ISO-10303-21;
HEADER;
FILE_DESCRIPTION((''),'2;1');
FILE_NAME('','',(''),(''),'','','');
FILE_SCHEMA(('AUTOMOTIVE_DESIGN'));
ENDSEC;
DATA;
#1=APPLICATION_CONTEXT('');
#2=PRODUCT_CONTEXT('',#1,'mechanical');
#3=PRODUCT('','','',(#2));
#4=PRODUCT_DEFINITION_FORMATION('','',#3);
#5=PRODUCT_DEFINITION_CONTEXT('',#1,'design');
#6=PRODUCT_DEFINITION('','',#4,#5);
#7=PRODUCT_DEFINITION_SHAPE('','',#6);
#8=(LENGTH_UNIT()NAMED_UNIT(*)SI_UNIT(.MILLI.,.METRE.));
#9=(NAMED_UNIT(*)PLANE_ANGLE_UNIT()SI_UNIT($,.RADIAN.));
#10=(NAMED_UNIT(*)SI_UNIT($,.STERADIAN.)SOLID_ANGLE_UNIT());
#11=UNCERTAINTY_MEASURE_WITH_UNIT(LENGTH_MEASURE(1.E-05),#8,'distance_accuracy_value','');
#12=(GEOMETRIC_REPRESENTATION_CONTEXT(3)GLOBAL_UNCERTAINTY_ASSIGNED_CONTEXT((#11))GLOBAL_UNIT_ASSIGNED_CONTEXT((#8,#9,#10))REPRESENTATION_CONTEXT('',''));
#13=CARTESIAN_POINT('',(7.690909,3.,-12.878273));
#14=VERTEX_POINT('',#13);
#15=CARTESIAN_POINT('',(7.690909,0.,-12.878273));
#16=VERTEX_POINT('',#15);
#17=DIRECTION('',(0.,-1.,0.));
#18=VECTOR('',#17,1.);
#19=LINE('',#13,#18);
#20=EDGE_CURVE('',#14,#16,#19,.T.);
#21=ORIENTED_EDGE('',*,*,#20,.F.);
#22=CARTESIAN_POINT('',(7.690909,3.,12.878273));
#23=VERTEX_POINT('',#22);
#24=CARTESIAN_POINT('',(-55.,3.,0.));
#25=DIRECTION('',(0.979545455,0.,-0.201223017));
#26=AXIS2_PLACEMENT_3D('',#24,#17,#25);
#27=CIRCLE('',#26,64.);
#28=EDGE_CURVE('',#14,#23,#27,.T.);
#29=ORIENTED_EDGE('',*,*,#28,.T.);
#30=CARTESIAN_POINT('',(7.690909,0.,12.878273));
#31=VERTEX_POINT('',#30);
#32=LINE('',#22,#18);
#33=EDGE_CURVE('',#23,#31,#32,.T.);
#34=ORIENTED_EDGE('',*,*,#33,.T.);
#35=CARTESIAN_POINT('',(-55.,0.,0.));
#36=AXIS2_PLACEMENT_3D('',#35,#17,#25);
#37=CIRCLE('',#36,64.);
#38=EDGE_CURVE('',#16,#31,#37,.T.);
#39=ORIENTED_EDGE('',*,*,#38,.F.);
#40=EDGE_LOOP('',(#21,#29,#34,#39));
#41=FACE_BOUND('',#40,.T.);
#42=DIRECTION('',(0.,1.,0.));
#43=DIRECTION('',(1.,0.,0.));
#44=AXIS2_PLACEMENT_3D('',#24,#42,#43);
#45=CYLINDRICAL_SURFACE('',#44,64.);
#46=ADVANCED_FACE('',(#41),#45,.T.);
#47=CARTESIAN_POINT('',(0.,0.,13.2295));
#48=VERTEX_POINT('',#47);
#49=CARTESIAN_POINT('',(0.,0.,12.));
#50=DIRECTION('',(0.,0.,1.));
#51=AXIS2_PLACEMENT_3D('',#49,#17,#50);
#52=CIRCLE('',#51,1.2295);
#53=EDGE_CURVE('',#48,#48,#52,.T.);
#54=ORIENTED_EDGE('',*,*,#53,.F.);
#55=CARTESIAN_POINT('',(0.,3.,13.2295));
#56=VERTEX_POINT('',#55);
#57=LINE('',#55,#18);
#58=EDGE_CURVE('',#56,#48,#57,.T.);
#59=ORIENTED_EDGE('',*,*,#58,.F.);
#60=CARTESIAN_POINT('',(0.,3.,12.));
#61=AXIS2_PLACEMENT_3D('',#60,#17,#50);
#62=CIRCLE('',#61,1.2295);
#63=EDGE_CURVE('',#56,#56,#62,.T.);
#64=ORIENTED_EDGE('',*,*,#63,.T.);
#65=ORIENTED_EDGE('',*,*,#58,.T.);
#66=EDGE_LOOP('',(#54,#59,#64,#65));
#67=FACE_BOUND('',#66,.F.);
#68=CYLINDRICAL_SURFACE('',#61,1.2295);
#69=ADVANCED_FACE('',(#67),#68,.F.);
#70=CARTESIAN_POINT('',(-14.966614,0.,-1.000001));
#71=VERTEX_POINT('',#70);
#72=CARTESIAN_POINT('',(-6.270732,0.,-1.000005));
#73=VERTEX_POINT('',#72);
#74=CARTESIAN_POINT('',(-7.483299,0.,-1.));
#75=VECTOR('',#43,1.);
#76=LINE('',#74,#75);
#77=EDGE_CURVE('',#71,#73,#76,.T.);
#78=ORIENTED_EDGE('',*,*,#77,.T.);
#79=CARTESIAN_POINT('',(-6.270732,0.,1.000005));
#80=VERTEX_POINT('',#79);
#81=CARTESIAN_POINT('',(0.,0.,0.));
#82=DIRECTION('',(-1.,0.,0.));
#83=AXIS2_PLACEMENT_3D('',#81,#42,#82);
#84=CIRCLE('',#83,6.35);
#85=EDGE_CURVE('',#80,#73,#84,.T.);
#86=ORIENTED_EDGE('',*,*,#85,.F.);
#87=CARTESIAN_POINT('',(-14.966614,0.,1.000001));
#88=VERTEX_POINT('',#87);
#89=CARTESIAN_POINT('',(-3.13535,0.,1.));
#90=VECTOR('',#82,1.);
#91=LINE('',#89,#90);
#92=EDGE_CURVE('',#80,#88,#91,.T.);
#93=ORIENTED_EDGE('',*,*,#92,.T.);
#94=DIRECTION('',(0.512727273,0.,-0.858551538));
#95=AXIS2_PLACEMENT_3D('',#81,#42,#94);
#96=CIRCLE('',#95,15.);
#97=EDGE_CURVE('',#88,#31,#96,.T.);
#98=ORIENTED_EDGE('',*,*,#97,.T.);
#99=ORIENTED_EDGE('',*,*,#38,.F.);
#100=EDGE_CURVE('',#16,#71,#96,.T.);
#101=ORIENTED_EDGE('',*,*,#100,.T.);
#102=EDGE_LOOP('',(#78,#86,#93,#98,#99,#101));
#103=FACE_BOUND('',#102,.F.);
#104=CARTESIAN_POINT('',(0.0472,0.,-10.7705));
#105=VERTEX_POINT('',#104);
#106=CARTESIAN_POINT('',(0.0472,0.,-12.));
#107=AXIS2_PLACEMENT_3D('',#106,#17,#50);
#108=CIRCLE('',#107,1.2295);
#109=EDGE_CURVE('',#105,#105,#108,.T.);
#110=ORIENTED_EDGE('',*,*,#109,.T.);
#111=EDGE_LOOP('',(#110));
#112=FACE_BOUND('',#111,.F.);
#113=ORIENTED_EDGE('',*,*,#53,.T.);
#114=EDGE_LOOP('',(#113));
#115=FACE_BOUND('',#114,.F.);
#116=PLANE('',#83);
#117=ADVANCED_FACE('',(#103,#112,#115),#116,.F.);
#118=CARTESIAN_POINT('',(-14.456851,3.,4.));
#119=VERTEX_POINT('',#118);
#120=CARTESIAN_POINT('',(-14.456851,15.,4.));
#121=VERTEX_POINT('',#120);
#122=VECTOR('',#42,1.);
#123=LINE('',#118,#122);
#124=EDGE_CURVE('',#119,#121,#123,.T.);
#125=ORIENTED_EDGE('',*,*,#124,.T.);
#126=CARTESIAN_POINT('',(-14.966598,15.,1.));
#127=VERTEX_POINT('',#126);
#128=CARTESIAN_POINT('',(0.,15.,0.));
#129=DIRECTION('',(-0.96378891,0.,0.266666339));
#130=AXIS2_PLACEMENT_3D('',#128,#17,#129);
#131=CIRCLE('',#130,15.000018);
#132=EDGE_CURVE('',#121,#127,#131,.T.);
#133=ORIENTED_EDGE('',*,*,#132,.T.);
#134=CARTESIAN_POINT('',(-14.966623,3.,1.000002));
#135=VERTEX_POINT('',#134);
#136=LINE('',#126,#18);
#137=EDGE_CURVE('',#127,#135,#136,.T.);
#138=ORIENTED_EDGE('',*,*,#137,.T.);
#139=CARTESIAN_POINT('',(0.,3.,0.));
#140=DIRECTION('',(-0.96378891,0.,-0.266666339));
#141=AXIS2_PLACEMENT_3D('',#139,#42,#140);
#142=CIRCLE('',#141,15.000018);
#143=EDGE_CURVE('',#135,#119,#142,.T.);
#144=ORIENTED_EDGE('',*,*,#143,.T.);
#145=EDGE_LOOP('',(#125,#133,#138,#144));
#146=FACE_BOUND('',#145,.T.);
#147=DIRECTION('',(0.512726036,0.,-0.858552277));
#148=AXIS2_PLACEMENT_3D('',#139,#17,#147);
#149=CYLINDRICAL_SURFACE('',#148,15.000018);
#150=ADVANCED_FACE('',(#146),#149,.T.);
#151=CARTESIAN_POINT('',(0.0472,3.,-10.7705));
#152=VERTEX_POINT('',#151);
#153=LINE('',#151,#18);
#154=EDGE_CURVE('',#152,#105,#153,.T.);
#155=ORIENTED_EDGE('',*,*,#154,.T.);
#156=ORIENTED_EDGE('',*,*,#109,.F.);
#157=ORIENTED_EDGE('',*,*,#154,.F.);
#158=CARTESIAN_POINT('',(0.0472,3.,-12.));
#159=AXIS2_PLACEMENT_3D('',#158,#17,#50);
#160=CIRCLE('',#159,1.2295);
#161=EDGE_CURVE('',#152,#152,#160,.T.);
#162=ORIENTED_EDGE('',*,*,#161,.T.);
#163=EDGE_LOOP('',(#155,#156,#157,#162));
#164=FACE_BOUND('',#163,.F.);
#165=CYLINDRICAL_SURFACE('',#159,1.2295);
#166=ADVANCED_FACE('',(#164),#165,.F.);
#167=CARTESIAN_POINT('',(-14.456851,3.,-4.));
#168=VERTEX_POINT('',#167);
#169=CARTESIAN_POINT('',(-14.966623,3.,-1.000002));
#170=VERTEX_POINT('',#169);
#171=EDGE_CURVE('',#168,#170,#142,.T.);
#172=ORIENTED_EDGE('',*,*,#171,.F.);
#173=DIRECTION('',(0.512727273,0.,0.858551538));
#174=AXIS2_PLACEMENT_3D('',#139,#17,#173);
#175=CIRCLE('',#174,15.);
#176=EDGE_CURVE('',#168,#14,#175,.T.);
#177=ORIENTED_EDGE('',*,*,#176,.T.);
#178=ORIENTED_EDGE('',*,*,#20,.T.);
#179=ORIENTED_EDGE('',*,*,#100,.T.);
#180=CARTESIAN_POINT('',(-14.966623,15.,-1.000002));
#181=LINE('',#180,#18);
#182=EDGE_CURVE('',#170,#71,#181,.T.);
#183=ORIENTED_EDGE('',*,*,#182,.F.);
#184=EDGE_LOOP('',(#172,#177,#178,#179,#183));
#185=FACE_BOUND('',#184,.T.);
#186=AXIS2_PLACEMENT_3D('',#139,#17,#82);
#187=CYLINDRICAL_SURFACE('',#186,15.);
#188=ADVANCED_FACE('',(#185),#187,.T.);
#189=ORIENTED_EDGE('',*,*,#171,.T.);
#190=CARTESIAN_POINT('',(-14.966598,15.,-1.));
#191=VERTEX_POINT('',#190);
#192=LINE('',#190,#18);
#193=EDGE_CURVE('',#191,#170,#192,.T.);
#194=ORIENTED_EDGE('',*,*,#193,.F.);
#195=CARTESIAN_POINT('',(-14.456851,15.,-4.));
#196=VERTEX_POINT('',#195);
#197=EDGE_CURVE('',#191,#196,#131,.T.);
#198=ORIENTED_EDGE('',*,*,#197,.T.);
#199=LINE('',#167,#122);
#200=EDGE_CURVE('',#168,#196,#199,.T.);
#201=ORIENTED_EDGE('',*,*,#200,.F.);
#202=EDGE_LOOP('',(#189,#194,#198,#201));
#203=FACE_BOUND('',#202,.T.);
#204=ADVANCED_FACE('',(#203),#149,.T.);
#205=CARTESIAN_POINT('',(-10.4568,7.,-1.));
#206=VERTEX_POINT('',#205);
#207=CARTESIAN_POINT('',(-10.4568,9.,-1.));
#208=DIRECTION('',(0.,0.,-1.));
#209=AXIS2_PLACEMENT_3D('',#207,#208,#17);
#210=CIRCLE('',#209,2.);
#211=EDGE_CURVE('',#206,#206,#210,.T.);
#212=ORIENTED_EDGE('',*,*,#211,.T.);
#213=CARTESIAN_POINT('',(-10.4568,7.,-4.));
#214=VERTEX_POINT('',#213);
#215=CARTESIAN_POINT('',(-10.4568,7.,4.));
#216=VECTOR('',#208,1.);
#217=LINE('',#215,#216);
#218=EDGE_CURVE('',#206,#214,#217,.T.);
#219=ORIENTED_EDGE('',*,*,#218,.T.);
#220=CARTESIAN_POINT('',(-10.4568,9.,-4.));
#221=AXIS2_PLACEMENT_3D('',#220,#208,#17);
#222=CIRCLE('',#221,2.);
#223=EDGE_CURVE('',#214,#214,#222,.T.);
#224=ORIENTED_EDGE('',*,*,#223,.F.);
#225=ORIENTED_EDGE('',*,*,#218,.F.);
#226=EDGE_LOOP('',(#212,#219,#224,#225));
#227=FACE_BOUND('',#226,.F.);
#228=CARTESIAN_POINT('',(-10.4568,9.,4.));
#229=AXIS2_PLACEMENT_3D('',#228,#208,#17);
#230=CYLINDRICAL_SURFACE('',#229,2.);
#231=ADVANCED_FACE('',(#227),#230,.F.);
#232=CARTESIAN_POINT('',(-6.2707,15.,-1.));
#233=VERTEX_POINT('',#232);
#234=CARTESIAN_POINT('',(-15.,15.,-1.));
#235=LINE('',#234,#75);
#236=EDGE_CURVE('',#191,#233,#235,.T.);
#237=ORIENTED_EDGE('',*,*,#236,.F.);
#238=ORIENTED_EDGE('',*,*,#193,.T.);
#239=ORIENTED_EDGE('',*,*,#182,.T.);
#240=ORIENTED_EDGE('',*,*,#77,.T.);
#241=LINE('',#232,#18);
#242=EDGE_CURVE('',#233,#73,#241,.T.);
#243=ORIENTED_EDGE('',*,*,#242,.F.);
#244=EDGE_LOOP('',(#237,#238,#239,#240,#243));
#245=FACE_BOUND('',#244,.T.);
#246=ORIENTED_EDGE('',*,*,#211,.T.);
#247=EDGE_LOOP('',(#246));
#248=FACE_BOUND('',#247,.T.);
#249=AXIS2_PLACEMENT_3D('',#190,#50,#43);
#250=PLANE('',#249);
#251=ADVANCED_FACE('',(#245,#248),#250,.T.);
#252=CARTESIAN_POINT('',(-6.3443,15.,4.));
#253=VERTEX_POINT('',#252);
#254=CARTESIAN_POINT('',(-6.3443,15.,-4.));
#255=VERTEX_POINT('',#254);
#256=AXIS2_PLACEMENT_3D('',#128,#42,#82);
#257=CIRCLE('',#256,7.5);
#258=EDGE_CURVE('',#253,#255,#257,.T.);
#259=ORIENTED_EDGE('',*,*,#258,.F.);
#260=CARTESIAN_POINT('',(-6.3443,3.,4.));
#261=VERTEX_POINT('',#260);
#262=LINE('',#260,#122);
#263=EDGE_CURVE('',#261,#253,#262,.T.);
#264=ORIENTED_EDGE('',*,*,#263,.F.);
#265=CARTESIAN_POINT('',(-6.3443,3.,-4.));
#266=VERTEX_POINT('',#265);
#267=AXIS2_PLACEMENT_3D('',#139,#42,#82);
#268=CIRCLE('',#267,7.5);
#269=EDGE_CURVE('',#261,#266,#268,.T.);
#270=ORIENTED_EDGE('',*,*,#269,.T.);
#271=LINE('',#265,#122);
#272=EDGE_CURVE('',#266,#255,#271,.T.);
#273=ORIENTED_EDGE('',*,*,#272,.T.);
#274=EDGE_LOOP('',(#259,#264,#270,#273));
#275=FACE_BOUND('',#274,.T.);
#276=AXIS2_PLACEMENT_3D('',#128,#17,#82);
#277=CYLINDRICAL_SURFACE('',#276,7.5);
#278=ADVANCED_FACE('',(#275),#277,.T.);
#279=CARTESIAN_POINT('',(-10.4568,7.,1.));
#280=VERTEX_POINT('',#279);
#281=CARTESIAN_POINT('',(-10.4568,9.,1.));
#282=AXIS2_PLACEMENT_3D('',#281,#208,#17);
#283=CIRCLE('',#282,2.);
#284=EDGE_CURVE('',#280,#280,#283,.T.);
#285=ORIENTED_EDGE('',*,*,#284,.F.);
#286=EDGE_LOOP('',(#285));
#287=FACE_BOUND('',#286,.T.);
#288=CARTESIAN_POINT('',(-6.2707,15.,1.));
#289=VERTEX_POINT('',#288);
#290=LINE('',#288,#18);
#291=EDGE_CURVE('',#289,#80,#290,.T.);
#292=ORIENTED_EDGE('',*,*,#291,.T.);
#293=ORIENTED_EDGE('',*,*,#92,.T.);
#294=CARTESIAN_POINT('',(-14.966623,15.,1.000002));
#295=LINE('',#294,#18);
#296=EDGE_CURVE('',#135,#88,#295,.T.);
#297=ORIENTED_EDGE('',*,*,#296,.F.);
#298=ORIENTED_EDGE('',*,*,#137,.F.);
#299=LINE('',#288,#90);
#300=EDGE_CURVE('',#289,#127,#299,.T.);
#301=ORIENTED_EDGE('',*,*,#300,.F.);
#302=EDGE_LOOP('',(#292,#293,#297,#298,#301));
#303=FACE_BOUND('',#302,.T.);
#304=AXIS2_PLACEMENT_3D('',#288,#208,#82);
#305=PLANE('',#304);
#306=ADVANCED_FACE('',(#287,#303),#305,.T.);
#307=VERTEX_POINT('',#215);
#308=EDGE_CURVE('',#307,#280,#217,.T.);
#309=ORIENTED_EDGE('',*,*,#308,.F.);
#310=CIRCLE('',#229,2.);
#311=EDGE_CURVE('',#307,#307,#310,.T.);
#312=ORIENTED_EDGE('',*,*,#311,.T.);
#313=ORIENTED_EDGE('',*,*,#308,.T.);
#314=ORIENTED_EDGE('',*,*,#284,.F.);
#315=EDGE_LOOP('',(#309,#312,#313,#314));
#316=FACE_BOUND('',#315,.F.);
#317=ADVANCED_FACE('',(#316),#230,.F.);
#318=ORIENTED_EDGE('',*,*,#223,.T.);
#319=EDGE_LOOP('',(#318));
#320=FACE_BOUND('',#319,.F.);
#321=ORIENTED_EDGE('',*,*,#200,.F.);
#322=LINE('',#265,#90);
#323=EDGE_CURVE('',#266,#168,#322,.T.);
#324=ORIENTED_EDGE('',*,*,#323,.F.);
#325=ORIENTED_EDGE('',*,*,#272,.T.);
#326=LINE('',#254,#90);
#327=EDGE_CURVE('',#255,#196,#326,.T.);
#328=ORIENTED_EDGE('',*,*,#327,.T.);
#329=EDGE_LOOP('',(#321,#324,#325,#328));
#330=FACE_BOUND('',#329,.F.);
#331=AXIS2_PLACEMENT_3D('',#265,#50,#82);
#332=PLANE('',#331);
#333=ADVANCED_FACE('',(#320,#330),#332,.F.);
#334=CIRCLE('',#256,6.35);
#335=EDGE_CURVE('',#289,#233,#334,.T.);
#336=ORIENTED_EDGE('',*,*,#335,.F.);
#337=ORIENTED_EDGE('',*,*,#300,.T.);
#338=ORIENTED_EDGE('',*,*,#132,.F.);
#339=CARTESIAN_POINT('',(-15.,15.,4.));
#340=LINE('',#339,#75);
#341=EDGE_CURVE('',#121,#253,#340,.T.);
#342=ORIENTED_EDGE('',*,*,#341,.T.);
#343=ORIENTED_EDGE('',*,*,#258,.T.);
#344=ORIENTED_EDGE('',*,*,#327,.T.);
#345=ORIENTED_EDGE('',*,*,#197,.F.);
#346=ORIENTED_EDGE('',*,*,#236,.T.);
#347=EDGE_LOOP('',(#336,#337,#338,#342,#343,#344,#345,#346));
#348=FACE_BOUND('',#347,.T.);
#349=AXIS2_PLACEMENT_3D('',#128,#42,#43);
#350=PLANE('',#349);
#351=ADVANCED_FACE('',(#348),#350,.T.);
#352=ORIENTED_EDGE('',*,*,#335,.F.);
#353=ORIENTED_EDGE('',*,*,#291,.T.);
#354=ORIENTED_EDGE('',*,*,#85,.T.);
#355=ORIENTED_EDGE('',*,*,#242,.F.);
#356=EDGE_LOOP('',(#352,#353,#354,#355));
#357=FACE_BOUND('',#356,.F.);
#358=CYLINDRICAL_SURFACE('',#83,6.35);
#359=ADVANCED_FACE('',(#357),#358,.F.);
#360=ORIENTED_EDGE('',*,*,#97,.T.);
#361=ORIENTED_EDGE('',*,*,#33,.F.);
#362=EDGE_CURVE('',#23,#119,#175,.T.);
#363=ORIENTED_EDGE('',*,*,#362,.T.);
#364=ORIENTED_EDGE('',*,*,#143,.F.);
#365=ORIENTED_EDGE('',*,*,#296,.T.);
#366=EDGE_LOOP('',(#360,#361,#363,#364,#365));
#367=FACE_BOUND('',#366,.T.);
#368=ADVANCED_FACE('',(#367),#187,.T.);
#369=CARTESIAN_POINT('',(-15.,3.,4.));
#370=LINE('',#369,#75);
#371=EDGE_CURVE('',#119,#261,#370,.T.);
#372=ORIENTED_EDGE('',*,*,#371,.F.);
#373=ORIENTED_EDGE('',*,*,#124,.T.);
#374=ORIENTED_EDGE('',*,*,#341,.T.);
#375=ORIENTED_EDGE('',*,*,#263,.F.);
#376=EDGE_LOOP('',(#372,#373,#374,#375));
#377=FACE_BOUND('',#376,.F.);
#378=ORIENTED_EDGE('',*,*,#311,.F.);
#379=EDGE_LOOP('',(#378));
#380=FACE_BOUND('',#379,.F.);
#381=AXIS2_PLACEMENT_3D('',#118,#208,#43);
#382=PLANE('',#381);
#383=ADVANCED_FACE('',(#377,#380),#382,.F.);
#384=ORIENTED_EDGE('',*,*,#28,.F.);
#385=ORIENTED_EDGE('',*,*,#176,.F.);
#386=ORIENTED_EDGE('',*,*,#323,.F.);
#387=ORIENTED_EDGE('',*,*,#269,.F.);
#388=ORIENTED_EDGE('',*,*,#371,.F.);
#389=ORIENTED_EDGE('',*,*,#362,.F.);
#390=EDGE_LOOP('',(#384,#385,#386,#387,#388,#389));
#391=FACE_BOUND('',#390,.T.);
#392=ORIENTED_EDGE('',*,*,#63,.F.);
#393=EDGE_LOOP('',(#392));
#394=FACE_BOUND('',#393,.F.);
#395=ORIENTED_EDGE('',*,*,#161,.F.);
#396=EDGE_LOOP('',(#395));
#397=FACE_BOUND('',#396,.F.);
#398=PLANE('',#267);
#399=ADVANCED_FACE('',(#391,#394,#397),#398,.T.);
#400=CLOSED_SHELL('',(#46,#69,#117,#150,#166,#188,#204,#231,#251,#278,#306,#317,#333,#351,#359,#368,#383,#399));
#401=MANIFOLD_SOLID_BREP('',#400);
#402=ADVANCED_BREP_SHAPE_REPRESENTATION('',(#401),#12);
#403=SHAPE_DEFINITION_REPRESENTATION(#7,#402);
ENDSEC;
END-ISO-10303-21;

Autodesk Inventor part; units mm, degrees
ref_plane "YZ Plane" through (0, 0, 0) normal (1, 0, 0) x (0, 1, 0)
ref_plane "XZ Plane" through (0, 0, 0) normal (0, 1, 0) x (-1, 0, 0)
ref_plane "XY Plane" through (0, 0, 0) normal (0, 0, 1) x (1, 0, 0)
sketch "Sketch1" plane through (0, 0, 0) normal (0, 0, 1) x (1, 0, 0)
  line L0 (-15, 0) -> (-6.35, 0)
  line L1 (-6.35, 0) -> (-6.35, 15)
  line L2 (-6.35, 15) -> (-7.5, 15)
  line L3 (-7.5, 15) -> (-7.5, 3)
  line L4 (-7.5, 3) -> (-15, 3)
  line L5 (-15, 3) -> (-15, 0)
  line L6 (0, -3) -> (0, 18) projected
  point P0 (0, 0)
  dimension "d0" = 3
  dimension "d2" = 15
  dimension "d3" = 6.35
  dimension "d4" = 15
  dimension "d17" = 7.5
  dimension "d18" = 1.15
revolve "Revolution1" add sketch "Sketch1" angle 360 about axis through (0, -10, 0) along (0, 1, 0)
sketch "Sketch2" plane through (0, 3, 0) normal (0, 1, 0) x (1, 0, 0)
  point P0 (0, 0)
  point P1 (0.0472, 12)
  point P2 (0, -12)
  dimension "d6" = 12
  dimension "d22" = 12
hole "Hole1" at (0.0472, 3, -12) at (0, 3, 12) direction (0, -1, 0) diameter 2.459 end through all thread size "M3x0.5" class "6H" standard "ISO Metric profile"
sketch "Sketch4" plane through (0, 3, 0) normal (0, 1, 0) x (1, 0, 0)
  circle A0 centre (0, 0) radius 15 projected
  circle A1 centre (0, 0) radius 7.5 projected
  circle A2 centre (-55, 0) radius 64
  point P0 (7.6909, 12.8783)
  point P1 (7.5, 0)
  point P2 (7.6909, -12.8783)
  dimension "d23" = 128
  dimension "d24" = 55
extrude "Extrusion2" cut sketch "Sketch4" against normal through all contours A0 A2 picked at (10.8452, -2.4648)
sketch "Sketch6" plane through (0, 3, 0) normal (0, 1, 0) x (1, 0, 0)
  arc A0 (7.6909, 12.8783) -> (7.6909, -12.8783) centre (0, 0) ccw projected
  circle A1 centre (0, 0) radius 7.5 projected
  line L0 (-6.3443, 4) -> (-15, 4)
  line L1 (-15, 4) -> (-15, -4)
  line L2 (-15, -4) -> (-6.3443, -4)
  line L3 (-6.3443, -4) -> (-6.3443, 4)
  point P0 (-14.4568, -4)
  point P1 (-6.3443, -4)
  point P2 (-14.4568, 4)
  dimension "d32" = 4
  dimension "d33" = 4
extrude "Extrusion3" add sketch "Sketch6" along normal up to surface (12 mm away) contours L0 A1 L2 A0
sketch "Sketch7" plane through (-14.4568, 15, -4) normal (0, 1, 0) x (1, 0, 0)
  circle A0 centre (14.4568, -4) radius 6.35 projected
  line L0 (8.1861, -5) -> (-0.5432, -5)
  line L1 (-0.5432, -5) -> (-0.5432, -3)
  line L2 (-0.5432, -3) -> (8.1861, -3)
  line L3 (8.1861, -3) -> (8.1861, -5)
  arc A1 (0, 0) -> (0, -8) centre (14.4568, -4) ccw projected
  point P0 (-0.5098, -5)
  point P1 (8.1861, -3)
  point P2 (-0.5098, -3)
  dimension "d27" = 1
  dimension "d28" = 1
extrude "Extrusion4" cut sketch "Sketch7" against normal through all contours A0 L0 A1 L2
sketch "Sketch8" plane through (-14.4568, 3, 4) normal (0, 0, 1) x (1, 0, 0)
  line L0 (0, 0) -> (0, 12) projected
  line L1 (8.1125, 12) -> (0, 12) projected
  point P0 (7.0914, 12)
  point P1 (4, 6)
  dimension "d35" = 12
  dimension "d37" = 4
  dimension "d38" = 6
hole "Hole2" at (-10.4568, 9, 4) direction (0, 0, -1) diameter 4 end through all
equation "\"d22\" = d6"
equation "\"d24\" = tubes_r"
equation "\"d33\" = d32"
equation "\"d28\" = d27"
equation "\"d38\" = 0.5 * d35"
equation "\"tubes_r\" = 55"
properties part number "BaffleClampWithScrew" material "Brass, Soft Yellow"
